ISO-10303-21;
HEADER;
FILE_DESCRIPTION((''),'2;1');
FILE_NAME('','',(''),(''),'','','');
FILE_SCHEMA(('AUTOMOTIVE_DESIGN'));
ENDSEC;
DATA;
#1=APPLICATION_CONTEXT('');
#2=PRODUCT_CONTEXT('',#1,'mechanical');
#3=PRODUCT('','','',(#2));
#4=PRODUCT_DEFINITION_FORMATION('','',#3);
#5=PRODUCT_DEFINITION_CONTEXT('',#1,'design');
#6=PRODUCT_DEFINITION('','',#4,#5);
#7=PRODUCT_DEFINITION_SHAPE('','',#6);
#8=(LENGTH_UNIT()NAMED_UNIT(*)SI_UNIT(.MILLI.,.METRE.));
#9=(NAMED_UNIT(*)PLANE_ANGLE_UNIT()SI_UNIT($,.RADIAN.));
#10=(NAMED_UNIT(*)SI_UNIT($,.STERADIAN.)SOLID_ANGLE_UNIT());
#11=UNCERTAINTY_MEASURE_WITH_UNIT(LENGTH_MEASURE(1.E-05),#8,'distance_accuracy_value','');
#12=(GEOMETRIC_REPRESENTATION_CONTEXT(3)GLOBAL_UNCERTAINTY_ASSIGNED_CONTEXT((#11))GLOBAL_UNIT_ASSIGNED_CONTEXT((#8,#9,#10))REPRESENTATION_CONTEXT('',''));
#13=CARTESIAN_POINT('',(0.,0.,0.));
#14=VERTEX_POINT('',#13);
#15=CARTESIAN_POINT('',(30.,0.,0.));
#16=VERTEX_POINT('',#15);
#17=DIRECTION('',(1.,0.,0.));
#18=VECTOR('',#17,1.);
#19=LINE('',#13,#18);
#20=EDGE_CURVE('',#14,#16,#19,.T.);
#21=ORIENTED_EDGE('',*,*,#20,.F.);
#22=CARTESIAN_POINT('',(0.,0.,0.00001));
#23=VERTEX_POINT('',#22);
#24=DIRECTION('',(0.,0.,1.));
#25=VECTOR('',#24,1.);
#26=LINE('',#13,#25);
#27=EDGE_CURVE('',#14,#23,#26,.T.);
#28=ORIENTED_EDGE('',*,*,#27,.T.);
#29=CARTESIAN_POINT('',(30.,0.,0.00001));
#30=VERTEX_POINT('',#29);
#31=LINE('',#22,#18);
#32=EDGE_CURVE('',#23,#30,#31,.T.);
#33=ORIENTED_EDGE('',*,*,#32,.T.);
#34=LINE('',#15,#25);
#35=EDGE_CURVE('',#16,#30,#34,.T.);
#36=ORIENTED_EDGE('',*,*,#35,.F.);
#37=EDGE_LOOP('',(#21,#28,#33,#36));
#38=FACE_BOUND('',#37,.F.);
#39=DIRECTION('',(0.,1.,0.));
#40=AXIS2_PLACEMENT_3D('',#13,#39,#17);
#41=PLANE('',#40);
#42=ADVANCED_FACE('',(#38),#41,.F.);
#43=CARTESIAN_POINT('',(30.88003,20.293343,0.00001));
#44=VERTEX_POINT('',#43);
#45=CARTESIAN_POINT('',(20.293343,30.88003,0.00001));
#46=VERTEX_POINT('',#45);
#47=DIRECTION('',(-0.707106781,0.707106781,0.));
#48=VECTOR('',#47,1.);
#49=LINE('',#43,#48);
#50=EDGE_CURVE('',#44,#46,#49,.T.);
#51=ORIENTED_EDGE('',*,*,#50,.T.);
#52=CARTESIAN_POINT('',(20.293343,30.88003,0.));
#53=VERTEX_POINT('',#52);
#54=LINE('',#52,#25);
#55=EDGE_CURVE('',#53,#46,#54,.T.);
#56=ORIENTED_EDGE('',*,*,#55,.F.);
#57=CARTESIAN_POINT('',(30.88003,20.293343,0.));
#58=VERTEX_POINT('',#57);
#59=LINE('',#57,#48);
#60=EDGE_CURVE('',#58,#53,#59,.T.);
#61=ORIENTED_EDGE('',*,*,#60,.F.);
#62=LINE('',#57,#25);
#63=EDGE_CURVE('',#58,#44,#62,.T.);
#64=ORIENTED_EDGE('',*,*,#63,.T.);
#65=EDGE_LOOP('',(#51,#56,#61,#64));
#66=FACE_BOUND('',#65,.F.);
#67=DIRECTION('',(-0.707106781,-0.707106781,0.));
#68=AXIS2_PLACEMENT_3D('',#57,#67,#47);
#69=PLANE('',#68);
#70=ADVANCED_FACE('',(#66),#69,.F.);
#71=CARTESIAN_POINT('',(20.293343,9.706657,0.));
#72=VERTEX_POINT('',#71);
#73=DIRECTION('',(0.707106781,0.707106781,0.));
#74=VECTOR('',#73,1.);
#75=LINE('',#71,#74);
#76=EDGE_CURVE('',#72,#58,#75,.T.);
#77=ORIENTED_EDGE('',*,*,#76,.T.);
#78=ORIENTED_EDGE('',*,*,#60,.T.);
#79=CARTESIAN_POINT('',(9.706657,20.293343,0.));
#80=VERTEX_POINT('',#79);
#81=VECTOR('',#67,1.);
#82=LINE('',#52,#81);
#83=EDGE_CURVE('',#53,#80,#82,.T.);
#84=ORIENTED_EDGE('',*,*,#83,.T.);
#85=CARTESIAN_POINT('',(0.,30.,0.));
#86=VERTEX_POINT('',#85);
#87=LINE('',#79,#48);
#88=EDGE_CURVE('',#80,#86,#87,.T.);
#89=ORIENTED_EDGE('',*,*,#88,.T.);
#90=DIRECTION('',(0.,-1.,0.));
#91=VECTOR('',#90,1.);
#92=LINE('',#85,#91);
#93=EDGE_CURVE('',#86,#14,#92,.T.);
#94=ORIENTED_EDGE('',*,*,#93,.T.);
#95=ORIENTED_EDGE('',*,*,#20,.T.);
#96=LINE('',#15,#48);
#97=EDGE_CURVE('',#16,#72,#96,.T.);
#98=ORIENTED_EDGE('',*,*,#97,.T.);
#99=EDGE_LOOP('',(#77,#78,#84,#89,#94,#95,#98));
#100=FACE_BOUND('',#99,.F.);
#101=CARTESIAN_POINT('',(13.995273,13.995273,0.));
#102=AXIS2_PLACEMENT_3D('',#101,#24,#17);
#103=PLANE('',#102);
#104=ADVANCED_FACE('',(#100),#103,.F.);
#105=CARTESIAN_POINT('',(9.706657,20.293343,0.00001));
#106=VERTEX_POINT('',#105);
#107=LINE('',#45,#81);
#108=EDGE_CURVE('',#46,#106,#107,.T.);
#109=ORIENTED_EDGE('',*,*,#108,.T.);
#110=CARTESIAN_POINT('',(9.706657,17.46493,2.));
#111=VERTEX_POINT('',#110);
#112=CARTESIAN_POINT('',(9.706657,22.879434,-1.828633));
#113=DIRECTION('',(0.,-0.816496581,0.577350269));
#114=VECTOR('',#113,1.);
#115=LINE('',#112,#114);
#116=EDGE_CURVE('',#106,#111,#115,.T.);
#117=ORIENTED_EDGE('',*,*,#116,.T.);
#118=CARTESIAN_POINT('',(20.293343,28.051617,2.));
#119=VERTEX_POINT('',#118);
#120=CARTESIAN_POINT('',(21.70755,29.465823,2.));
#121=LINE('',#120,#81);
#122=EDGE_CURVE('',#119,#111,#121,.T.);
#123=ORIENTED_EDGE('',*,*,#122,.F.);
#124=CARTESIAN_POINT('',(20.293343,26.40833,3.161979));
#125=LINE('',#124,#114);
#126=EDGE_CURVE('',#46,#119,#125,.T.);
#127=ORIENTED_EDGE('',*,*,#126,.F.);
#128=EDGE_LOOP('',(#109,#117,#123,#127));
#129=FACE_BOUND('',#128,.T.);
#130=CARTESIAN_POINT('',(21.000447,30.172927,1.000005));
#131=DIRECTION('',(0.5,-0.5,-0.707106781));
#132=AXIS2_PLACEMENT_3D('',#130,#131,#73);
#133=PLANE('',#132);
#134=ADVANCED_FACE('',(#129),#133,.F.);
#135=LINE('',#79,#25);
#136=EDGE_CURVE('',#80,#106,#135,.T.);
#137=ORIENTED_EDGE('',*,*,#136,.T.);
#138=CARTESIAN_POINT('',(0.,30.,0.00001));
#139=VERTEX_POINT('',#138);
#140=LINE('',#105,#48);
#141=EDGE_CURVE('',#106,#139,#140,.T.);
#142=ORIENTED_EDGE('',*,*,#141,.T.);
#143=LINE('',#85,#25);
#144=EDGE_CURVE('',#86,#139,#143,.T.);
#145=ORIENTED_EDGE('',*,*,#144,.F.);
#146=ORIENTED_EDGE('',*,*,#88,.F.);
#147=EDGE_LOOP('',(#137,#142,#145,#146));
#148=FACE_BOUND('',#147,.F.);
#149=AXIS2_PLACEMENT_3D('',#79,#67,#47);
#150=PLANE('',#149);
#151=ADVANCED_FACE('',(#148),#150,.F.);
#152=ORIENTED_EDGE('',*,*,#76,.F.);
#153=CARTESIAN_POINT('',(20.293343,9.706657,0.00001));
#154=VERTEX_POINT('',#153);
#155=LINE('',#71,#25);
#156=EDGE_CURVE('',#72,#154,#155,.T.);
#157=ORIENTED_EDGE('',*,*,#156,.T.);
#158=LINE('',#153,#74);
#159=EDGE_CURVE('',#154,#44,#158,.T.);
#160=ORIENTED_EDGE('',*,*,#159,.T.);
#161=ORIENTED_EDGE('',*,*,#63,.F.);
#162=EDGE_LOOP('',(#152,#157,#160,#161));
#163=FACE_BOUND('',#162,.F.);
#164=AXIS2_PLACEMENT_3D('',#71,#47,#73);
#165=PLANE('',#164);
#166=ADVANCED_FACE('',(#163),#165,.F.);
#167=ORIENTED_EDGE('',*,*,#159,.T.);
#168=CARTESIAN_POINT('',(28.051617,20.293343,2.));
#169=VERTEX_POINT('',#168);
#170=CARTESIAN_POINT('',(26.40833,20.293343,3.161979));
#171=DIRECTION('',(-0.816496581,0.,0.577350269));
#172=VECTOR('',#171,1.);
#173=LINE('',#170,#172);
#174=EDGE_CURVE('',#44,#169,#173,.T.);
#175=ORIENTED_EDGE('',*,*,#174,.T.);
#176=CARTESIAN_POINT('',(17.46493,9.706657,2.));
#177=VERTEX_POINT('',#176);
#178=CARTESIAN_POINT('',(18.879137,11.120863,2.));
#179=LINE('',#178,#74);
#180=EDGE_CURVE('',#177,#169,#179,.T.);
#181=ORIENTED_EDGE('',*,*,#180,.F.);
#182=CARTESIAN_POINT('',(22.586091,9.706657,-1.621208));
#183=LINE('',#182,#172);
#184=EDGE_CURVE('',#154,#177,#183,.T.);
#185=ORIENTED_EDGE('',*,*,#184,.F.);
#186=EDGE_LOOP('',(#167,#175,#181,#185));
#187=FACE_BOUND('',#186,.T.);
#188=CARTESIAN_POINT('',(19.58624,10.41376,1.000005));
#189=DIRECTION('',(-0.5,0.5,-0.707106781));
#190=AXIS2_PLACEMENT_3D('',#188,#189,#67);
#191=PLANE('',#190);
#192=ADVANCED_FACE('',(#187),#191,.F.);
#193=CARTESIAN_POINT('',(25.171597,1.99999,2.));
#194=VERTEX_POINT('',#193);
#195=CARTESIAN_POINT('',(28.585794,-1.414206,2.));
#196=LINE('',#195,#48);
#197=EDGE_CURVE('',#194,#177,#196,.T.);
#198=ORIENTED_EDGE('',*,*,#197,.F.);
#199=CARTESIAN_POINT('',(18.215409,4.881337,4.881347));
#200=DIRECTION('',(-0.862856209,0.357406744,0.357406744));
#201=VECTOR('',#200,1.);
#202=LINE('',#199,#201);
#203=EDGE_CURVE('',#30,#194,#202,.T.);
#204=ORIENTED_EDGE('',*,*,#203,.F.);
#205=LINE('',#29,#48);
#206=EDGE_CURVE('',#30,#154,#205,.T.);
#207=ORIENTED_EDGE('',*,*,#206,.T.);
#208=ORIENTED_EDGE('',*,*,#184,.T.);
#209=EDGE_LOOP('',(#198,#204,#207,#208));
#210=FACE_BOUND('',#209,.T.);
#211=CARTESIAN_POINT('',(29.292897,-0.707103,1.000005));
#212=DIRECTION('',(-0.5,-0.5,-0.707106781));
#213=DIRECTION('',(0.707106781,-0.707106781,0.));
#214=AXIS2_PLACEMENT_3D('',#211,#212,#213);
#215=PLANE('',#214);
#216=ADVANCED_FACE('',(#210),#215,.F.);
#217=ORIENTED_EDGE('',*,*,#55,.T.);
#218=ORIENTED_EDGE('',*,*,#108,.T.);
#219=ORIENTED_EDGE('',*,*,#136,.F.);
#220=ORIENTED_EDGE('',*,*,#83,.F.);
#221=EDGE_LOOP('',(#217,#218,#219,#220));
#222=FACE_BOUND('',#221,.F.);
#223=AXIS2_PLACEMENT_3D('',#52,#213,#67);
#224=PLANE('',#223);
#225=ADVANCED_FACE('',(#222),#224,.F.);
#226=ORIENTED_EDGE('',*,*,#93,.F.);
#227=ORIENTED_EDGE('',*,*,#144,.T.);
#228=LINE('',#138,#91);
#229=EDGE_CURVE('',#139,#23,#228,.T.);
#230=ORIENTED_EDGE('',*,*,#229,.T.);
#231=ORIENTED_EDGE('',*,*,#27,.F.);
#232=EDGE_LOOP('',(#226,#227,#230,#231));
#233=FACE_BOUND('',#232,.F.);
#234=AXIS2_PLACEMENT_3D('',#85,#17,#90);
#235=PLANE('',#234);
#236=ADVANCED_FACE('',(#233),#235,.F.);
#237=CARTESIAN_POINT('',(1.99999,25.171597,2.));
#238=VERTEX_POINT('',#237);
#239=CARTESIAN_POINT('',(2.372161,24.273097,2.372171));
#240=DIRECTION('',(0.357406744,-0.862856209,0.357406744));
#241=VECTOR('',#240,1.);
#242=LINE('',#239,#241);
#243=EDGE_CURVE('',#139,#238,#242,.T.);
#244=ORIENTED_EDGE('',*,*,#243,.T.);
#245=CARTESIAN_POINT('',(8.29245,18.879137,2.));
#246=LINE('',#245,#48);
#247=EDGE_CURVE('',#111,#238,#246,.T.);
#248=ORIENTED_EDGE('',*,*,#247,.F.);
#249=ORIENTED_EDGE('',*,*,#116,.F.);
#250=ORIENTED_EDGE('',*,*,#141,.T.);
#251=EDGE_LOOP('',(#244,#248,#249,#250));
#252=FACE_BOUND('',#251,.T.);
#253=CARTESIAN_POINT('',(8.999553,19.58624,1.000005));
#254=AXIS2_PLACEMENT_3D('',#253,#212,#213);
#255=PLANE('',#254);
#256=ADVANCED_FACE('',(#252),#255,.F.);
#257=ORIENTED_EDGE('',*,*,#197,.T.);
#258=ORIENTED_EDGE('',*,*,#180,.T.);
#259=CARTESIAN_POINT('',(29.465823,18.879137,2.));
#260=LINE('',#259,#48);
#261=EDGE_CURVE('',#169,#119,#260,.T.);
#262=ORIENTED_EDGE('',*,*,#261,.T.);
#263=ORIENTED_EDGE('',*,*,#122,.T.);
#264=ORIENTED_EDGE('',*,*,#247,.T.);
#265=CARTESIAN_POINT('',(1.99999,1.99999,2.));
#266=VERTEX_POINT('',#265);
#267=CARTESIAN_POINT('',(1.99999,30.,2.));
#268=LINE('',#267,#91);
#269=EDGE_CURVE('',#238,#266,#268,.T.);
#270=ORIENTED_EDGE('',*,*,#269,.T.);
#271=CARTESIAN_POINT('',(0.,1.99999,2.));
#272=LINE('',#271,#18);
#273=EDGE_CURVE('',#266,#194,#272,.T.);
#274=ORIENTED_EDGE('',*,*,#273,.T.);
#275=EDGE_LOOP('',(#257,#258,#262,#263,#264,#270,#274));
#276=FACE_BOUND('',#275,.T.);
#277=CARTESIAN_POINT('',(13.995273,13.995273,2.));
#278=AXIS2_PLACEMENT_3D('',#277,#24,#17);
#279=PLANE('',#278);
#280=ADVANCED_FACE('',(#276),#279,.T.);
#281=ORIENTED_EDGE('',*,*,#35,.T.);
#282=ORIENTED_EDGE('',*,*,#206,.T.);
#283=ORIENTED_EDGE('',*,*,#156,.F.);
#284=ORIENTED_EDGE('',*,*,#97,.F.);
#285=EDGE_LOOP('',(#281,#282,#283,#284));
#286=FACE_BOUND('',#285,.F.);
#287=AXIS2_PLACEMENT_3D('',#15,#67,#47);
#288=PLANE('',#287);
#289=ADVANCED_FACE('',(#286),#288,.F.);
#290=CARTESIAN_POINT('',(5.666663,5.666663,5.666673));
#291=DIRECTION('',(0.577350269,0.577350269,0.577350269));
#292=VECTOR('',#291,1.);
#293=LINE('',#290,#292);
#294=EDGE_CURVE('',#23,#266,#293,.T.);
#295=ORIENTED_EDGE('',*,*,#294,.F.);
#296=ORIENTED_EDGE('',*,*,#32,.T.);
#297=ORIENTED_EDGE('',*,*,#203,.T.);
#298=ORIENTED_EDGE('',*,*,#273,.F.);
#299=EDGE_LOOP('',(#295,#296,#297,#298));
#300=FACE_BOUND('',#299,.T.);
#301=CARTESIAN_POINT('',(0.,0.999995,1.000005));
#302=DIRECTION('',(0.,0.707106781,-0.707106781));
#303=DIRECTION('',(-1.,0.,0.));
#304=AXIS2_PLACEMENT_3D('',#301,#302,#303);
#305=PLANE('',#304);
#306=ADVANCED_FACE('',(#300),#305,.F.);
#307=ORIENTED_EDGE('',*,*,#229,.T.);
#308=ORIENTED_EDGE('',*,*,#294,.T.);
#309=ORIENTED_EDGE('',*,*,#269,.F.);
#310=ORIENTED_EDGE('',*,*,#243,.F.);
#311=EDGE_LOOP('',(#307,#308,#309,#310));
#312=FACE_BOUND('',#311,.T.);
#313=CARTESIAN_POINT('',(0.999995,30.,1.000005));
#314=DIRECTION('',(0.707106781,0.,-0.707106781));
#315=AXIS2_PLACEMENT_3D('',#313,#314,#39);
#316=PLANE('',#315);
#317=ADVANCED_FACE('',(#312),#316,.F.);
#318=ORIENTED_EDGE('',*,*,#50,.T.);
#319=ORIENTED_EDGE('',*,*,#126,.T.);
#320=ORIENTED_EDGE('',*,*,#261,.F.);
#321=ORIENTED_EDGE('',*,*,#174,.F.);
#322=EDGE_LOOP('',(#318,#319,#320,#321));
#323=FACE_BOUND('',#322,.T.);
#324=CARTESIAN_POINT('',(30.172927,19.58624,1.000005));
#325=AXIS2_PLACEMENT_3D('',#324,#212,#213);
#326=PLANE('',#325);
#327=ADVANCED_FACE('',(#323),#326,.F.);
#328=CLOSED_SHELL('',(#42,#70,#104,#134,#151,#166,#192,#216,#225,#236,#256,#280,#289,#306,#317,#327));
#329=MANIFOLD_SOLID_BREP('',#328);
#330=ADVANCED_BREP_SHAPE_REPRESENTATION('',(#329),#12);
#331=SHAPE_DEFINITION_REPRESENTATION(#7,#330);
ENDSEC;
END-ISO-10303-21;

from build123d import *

# Parameters (mm, degrees)
F1_DEPTH = 2
F2_SIZE  = 1.99999


# Not quite as in the source:
# - a fillet or chamfer is up to 0.001 mm smaller than in the source, because OpenCascade refuses the exact size


with BuildPart() as f1:
    # F0 (on Top) → F1 (new body)
    with BuildSketch(Plane.XY):
        Polygon((0, 30), (0, 0), (30, 0), (20.2933432917, 9.7066567083), (30.880029875, 20.2933432917), (20.2933432917, 30.880029875), (9.7066567083, 20.2933432917), align=None)
    extrude(amount=F1_DEPTH)

    # F2 (size 2 in the source; OpenCascade refuses exactly that, so slightly less here)
    f2_edges = [f1.edges().sort_by_distance(p)[0] for p in [
        (25.586687, 15, 2),
        (15, 25.586687, 2),
        (25.146672, 4.853328, 2),
        (15, 0, 2),
        (0, 15, 2),
        (4.853328, 25.146672, 2),
        (25.586687, 25.586687, 2),
    ]]
    chamfer(f2_edges, length=F2_SIZE)


solid = f1.part
